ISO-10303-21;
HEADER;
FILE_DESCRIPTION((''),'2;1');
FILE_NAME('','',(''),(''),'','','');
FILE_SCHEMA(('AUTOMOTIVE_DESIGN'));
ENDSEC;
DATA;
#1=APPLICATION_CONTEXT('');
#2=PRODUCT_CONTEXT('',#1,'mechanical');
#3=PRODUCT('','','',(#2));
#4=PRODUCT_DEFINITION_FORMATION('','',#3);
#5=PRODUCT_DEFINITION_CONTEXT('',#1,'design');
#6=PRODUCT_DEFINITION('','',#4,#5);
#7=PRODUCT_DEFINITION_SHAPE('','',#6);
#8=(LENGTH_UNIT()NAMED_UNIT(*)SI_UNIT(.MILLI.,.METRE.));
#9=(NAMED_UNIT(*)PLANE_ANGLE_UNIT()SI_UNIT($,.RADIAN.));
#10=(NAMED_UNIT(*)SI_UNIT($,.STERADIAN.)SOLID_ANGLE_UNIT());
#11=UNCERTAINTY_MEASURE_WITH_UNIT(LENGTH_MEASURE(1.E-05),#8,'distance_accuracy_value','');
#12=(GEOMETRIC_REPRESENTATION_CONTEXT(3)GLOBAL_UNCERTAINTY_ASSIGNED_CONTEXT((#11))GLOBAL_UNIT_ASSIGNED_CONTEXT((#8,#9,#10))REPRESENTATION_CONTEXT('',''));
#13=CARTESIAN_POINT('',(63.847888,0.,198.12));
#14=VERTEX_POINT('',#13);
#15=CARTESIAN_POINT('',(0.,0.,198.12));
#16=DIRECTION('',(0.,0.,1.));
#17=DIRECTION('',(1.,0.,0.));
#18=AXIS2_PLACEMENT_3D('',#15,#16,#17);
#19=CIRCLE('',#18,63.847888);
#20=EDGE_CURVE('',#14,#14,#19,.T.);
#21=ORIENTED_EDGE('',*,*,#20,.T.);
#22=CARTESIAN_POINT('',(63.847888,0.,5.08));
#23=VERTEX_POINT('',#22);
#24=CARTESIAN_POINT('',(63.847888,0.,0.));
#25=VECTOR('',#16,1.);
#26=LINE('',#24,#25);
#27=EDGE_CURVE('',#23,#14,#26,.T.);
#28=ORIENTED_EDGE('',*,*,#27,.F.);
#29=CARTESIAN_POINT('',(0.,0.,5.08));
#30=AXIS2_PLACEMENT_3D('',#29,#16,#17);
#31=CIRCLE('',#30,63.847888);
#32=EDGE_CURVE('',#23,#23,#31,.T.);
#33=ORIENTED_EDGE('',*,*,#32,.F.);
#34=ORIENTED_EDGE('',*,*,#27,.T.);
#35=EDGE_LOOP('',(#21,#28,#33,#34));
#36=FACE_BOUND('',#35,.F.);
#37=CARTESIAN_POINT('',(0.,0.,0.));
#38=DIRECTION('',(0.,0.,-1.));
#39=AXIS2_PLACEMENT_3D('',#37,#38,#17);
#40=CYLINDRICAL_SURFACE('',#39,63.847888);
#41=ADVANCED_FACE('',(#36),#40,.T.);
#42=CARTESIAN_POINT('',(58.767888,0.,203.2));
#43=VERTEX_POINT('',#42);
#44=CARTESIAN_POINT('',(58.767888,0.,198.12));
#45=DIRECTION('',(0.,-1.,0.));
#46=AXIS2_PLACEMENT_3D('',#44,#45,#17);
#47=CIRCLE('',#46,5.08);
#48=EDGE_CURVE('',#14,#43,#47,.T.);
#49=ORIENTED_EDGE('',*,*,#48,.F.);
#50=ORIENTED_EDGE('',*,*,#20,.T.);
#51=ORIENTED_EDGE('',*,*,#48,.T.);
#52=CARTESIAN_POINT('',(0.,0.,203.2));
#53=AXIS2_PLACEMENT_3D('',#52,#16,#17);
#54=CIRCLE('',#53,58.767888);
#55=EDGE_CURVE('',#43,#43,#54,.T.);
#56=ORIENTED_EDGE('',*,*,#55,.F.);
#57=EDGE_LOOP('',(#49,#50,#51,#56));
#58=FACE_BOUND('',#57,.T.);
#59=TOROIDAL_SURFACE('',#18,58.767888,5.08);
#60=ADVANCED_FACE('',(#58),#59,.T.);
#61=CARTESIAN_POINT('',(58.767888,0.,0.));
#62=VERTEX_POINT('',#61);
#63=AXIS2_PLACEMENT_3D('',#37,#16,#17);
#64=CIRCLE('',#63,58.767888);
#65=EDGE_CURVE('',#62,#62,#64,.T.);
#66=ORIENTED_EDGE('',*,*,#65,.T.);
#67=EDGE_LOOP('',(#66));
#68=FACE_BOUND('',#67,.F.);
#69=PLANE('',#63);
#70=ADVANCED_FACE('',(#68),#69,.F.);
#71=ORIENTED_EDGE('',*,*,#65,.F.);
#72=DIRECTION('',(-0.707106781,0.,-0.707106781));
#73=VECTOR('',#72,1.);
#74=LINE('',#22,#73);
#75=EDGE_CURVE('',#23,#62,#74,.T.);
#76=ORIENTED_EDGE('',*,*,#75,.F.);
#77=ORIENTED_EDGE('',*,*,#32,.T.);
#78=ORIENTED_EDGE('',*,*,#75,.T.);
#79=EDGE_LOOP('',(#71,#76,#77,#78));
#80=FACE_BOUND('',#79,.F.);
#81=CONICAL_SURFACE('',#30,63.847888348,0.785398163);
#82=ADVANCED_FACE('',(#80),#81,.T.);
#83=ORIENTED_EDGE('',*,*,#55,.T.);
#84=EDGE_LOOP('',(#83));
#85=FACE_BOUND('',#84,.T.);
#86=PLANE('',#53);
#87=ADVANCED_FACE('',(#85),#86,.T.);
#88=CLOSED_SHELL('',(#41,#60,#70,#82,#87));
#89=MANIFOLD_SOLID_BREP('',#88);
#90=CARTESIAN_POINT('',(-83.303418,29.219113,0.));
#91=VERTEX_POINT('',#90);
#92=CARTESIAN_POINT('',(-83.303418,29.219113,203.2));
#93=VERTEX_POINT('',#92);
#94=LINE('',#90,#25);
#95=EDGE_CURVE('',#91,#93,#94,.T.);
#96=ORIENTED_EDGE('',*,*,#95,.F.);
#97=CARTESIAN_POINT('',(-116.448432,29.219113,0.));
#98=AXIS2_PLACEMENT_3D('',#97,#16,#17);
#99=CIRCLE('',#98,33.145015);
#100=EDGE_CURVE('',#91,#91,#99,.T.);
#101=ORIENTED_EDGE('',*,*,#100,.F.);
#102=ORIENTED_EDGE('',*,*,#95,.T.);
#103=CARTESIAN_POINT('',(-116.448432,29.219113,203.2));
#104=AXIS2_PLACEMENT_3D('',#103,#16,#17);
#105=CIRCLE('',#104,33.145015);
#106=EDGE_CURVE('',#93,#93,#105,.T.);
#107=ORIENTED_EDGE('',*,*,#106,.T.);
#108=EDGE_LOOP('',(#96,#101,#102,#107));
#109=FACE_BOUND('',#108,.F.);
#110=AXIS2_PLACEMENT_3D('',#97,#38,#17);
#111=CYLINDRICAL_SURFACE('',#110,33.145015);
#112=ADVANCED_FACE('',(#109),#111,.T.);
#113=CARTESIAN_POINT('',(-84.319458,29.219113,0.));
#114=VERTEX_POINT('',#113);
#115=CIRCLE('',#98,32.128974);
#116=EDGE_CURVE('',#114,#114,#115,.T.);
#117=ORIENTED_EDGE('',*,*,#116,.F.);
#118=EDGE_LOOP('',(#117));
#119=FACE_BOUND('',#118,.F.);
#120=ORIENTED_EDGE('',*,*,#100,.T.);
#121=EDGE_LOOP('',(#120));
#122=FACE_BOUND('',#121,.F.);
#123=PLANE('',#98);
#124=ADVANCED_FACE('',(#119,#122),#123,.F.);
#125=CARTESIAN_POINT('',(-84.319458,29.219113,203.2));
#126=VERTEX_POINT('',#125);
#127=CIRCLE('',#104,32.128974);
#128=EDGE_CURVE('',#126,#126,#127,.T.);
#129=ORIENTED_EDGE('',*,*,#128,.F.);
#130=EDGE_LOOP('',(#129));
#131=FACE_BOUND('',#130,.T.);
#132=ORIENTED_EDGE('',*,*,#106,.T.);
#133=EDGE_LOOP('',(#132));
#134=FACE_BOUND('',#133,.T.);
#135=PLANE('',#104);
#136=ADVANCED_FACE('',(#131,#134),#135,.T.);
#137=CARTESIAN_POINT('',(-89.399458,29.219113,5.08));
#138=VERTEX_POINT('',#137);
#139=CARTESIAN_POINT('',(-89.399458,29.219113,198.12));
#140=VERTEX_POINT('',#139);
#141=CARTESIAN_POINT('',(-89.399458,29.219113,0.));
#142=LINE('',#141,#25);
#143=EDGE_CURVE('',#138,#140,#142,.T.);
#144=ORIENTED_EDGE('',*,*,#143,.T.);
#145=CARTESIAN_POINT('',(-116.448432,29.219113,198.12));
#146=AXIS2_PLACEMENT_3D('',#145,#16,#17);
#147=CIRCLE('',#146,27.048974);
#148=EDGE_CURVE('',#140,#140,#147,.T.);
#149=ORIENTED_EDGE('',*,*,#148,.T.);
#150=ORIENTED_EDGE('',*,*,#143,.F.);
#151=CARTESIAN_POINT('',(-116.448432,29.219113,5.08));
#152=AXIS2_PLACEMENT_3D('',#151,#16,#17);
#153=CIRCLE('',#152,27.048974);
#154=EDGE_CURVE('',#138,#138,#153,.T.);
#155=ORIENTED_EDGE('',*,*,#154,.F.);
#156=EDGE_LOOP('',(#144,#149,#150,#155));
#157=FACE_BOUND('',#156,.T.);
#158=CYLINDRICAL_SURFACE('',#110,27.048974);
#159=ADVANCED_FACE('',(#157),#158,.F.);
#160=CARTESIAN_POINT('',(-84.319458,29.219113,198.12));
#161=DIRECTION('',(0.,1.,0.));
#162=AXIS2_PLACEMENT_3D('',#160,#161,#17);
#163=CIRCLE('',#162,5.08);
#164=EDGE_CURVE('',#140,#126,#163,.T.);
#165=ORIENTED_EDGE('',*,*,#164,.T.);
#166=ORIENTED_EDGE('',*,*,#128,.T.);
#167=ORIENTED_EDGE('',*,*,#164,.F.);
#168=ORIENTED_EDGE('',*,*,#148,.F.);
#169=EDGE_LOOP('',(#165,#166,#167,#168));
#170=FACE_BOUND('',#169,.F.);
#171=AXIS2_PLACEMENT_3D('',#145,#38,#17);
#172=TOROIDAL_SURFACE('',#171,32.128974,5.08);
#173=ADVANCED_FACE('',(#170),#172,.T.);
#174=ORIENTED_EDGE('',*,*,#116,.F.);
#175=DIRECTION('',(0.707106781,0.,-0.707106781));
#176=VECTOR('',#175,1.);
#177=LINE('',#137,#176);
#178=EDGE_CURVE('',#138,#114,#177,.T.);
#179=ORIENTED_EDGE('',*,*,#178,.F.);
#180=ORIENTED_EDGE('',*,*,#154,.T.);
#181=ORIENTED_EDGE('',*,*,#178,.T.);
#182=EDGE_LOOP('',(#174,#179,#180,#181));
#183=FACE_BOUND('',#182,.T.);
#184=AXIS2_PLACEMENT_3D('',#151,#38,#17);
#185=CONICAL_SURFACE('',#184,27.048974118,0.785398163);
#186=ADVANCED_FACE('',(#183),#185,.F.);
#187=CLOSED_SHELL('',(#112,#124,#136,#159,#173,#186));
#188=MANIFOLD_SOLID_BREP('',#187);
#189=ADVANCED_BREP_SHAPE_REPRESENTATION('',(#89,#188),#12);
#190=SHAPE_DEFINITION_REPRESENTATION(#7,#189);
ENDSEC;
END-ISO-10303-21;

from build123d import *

# Parameters (mm, degrees)
F0_R      = 33.1450146476
F0_R_2    = 27.048974118
F1_DEPTH  = 203.2
F0_R_3    = 63.8478883476
F3_R      = 5.08
F3_2_R    = 5.08
F4_SIZE   = 5.08
F4_2_SIZE = 5.08


# Not quite as in the source:
# - a feature of the source that left no trace in its solid (it failed there, or was rolled back) is left out


with BuildPart() as f1:
    # F0 (on Top) → F1 (new body)
    with BuildSketch(Plane.XY):
        with Locations((-116.4484322071, 29.2191132903)):
            Circle(F0_R)
        with Locations((-116.4484322071, 29.2191132903)):
            Circle(F0_R_2, mode=Mode.SUBTRACT)
    extrude(amount=F1_DEPTH)

    # F3
    f3_edges = [f1.edges().sort_by_distance(p)[0] for p in [
        (-143.497406, 29.219113, 203.2),
    ]]
    fillet(f3_edges, radius=F3_R)

    # F4
    f4_edges = [f1.edges().sort_by_distance(p)[0] for p in [
        (-89.399458, 29.219113, 99.06),
        (-143.497406, 29.219113, 198.12),
        (-143.497406, 29.219113, 0),
    ]]
    chamfer(f4_edges, length=F4_SIZE)


with BuildPart() as f1b:
    # F0 (on Top) → F1, piece 2 (new body)
    with BuildSketch(Plane.XY):
        Circle(F0_R_3)
    extrude(amount=F1_DEPTH)

    # F3#2
    f3_2_edges = [f1b.edges().sort_by_distance(p)[0] for p in [
        (-63.847888, 0, 203.2),
    ]]
    fillet(f3_2_edges, radius=F3_2_R)

    # F4#2
    f4_2_edges = [f1b.edges().sort_by_distance(p)[0] for p in [
        (63.847888, 0, 99.06),
        (-63.847888, 0, 198.12),
        (-63.847888, 0, 0),
    ]]
    chamfer(f4_2_edges, length=F4_2_SIZE)


solid = Compound([f1.part, f1b.part])
